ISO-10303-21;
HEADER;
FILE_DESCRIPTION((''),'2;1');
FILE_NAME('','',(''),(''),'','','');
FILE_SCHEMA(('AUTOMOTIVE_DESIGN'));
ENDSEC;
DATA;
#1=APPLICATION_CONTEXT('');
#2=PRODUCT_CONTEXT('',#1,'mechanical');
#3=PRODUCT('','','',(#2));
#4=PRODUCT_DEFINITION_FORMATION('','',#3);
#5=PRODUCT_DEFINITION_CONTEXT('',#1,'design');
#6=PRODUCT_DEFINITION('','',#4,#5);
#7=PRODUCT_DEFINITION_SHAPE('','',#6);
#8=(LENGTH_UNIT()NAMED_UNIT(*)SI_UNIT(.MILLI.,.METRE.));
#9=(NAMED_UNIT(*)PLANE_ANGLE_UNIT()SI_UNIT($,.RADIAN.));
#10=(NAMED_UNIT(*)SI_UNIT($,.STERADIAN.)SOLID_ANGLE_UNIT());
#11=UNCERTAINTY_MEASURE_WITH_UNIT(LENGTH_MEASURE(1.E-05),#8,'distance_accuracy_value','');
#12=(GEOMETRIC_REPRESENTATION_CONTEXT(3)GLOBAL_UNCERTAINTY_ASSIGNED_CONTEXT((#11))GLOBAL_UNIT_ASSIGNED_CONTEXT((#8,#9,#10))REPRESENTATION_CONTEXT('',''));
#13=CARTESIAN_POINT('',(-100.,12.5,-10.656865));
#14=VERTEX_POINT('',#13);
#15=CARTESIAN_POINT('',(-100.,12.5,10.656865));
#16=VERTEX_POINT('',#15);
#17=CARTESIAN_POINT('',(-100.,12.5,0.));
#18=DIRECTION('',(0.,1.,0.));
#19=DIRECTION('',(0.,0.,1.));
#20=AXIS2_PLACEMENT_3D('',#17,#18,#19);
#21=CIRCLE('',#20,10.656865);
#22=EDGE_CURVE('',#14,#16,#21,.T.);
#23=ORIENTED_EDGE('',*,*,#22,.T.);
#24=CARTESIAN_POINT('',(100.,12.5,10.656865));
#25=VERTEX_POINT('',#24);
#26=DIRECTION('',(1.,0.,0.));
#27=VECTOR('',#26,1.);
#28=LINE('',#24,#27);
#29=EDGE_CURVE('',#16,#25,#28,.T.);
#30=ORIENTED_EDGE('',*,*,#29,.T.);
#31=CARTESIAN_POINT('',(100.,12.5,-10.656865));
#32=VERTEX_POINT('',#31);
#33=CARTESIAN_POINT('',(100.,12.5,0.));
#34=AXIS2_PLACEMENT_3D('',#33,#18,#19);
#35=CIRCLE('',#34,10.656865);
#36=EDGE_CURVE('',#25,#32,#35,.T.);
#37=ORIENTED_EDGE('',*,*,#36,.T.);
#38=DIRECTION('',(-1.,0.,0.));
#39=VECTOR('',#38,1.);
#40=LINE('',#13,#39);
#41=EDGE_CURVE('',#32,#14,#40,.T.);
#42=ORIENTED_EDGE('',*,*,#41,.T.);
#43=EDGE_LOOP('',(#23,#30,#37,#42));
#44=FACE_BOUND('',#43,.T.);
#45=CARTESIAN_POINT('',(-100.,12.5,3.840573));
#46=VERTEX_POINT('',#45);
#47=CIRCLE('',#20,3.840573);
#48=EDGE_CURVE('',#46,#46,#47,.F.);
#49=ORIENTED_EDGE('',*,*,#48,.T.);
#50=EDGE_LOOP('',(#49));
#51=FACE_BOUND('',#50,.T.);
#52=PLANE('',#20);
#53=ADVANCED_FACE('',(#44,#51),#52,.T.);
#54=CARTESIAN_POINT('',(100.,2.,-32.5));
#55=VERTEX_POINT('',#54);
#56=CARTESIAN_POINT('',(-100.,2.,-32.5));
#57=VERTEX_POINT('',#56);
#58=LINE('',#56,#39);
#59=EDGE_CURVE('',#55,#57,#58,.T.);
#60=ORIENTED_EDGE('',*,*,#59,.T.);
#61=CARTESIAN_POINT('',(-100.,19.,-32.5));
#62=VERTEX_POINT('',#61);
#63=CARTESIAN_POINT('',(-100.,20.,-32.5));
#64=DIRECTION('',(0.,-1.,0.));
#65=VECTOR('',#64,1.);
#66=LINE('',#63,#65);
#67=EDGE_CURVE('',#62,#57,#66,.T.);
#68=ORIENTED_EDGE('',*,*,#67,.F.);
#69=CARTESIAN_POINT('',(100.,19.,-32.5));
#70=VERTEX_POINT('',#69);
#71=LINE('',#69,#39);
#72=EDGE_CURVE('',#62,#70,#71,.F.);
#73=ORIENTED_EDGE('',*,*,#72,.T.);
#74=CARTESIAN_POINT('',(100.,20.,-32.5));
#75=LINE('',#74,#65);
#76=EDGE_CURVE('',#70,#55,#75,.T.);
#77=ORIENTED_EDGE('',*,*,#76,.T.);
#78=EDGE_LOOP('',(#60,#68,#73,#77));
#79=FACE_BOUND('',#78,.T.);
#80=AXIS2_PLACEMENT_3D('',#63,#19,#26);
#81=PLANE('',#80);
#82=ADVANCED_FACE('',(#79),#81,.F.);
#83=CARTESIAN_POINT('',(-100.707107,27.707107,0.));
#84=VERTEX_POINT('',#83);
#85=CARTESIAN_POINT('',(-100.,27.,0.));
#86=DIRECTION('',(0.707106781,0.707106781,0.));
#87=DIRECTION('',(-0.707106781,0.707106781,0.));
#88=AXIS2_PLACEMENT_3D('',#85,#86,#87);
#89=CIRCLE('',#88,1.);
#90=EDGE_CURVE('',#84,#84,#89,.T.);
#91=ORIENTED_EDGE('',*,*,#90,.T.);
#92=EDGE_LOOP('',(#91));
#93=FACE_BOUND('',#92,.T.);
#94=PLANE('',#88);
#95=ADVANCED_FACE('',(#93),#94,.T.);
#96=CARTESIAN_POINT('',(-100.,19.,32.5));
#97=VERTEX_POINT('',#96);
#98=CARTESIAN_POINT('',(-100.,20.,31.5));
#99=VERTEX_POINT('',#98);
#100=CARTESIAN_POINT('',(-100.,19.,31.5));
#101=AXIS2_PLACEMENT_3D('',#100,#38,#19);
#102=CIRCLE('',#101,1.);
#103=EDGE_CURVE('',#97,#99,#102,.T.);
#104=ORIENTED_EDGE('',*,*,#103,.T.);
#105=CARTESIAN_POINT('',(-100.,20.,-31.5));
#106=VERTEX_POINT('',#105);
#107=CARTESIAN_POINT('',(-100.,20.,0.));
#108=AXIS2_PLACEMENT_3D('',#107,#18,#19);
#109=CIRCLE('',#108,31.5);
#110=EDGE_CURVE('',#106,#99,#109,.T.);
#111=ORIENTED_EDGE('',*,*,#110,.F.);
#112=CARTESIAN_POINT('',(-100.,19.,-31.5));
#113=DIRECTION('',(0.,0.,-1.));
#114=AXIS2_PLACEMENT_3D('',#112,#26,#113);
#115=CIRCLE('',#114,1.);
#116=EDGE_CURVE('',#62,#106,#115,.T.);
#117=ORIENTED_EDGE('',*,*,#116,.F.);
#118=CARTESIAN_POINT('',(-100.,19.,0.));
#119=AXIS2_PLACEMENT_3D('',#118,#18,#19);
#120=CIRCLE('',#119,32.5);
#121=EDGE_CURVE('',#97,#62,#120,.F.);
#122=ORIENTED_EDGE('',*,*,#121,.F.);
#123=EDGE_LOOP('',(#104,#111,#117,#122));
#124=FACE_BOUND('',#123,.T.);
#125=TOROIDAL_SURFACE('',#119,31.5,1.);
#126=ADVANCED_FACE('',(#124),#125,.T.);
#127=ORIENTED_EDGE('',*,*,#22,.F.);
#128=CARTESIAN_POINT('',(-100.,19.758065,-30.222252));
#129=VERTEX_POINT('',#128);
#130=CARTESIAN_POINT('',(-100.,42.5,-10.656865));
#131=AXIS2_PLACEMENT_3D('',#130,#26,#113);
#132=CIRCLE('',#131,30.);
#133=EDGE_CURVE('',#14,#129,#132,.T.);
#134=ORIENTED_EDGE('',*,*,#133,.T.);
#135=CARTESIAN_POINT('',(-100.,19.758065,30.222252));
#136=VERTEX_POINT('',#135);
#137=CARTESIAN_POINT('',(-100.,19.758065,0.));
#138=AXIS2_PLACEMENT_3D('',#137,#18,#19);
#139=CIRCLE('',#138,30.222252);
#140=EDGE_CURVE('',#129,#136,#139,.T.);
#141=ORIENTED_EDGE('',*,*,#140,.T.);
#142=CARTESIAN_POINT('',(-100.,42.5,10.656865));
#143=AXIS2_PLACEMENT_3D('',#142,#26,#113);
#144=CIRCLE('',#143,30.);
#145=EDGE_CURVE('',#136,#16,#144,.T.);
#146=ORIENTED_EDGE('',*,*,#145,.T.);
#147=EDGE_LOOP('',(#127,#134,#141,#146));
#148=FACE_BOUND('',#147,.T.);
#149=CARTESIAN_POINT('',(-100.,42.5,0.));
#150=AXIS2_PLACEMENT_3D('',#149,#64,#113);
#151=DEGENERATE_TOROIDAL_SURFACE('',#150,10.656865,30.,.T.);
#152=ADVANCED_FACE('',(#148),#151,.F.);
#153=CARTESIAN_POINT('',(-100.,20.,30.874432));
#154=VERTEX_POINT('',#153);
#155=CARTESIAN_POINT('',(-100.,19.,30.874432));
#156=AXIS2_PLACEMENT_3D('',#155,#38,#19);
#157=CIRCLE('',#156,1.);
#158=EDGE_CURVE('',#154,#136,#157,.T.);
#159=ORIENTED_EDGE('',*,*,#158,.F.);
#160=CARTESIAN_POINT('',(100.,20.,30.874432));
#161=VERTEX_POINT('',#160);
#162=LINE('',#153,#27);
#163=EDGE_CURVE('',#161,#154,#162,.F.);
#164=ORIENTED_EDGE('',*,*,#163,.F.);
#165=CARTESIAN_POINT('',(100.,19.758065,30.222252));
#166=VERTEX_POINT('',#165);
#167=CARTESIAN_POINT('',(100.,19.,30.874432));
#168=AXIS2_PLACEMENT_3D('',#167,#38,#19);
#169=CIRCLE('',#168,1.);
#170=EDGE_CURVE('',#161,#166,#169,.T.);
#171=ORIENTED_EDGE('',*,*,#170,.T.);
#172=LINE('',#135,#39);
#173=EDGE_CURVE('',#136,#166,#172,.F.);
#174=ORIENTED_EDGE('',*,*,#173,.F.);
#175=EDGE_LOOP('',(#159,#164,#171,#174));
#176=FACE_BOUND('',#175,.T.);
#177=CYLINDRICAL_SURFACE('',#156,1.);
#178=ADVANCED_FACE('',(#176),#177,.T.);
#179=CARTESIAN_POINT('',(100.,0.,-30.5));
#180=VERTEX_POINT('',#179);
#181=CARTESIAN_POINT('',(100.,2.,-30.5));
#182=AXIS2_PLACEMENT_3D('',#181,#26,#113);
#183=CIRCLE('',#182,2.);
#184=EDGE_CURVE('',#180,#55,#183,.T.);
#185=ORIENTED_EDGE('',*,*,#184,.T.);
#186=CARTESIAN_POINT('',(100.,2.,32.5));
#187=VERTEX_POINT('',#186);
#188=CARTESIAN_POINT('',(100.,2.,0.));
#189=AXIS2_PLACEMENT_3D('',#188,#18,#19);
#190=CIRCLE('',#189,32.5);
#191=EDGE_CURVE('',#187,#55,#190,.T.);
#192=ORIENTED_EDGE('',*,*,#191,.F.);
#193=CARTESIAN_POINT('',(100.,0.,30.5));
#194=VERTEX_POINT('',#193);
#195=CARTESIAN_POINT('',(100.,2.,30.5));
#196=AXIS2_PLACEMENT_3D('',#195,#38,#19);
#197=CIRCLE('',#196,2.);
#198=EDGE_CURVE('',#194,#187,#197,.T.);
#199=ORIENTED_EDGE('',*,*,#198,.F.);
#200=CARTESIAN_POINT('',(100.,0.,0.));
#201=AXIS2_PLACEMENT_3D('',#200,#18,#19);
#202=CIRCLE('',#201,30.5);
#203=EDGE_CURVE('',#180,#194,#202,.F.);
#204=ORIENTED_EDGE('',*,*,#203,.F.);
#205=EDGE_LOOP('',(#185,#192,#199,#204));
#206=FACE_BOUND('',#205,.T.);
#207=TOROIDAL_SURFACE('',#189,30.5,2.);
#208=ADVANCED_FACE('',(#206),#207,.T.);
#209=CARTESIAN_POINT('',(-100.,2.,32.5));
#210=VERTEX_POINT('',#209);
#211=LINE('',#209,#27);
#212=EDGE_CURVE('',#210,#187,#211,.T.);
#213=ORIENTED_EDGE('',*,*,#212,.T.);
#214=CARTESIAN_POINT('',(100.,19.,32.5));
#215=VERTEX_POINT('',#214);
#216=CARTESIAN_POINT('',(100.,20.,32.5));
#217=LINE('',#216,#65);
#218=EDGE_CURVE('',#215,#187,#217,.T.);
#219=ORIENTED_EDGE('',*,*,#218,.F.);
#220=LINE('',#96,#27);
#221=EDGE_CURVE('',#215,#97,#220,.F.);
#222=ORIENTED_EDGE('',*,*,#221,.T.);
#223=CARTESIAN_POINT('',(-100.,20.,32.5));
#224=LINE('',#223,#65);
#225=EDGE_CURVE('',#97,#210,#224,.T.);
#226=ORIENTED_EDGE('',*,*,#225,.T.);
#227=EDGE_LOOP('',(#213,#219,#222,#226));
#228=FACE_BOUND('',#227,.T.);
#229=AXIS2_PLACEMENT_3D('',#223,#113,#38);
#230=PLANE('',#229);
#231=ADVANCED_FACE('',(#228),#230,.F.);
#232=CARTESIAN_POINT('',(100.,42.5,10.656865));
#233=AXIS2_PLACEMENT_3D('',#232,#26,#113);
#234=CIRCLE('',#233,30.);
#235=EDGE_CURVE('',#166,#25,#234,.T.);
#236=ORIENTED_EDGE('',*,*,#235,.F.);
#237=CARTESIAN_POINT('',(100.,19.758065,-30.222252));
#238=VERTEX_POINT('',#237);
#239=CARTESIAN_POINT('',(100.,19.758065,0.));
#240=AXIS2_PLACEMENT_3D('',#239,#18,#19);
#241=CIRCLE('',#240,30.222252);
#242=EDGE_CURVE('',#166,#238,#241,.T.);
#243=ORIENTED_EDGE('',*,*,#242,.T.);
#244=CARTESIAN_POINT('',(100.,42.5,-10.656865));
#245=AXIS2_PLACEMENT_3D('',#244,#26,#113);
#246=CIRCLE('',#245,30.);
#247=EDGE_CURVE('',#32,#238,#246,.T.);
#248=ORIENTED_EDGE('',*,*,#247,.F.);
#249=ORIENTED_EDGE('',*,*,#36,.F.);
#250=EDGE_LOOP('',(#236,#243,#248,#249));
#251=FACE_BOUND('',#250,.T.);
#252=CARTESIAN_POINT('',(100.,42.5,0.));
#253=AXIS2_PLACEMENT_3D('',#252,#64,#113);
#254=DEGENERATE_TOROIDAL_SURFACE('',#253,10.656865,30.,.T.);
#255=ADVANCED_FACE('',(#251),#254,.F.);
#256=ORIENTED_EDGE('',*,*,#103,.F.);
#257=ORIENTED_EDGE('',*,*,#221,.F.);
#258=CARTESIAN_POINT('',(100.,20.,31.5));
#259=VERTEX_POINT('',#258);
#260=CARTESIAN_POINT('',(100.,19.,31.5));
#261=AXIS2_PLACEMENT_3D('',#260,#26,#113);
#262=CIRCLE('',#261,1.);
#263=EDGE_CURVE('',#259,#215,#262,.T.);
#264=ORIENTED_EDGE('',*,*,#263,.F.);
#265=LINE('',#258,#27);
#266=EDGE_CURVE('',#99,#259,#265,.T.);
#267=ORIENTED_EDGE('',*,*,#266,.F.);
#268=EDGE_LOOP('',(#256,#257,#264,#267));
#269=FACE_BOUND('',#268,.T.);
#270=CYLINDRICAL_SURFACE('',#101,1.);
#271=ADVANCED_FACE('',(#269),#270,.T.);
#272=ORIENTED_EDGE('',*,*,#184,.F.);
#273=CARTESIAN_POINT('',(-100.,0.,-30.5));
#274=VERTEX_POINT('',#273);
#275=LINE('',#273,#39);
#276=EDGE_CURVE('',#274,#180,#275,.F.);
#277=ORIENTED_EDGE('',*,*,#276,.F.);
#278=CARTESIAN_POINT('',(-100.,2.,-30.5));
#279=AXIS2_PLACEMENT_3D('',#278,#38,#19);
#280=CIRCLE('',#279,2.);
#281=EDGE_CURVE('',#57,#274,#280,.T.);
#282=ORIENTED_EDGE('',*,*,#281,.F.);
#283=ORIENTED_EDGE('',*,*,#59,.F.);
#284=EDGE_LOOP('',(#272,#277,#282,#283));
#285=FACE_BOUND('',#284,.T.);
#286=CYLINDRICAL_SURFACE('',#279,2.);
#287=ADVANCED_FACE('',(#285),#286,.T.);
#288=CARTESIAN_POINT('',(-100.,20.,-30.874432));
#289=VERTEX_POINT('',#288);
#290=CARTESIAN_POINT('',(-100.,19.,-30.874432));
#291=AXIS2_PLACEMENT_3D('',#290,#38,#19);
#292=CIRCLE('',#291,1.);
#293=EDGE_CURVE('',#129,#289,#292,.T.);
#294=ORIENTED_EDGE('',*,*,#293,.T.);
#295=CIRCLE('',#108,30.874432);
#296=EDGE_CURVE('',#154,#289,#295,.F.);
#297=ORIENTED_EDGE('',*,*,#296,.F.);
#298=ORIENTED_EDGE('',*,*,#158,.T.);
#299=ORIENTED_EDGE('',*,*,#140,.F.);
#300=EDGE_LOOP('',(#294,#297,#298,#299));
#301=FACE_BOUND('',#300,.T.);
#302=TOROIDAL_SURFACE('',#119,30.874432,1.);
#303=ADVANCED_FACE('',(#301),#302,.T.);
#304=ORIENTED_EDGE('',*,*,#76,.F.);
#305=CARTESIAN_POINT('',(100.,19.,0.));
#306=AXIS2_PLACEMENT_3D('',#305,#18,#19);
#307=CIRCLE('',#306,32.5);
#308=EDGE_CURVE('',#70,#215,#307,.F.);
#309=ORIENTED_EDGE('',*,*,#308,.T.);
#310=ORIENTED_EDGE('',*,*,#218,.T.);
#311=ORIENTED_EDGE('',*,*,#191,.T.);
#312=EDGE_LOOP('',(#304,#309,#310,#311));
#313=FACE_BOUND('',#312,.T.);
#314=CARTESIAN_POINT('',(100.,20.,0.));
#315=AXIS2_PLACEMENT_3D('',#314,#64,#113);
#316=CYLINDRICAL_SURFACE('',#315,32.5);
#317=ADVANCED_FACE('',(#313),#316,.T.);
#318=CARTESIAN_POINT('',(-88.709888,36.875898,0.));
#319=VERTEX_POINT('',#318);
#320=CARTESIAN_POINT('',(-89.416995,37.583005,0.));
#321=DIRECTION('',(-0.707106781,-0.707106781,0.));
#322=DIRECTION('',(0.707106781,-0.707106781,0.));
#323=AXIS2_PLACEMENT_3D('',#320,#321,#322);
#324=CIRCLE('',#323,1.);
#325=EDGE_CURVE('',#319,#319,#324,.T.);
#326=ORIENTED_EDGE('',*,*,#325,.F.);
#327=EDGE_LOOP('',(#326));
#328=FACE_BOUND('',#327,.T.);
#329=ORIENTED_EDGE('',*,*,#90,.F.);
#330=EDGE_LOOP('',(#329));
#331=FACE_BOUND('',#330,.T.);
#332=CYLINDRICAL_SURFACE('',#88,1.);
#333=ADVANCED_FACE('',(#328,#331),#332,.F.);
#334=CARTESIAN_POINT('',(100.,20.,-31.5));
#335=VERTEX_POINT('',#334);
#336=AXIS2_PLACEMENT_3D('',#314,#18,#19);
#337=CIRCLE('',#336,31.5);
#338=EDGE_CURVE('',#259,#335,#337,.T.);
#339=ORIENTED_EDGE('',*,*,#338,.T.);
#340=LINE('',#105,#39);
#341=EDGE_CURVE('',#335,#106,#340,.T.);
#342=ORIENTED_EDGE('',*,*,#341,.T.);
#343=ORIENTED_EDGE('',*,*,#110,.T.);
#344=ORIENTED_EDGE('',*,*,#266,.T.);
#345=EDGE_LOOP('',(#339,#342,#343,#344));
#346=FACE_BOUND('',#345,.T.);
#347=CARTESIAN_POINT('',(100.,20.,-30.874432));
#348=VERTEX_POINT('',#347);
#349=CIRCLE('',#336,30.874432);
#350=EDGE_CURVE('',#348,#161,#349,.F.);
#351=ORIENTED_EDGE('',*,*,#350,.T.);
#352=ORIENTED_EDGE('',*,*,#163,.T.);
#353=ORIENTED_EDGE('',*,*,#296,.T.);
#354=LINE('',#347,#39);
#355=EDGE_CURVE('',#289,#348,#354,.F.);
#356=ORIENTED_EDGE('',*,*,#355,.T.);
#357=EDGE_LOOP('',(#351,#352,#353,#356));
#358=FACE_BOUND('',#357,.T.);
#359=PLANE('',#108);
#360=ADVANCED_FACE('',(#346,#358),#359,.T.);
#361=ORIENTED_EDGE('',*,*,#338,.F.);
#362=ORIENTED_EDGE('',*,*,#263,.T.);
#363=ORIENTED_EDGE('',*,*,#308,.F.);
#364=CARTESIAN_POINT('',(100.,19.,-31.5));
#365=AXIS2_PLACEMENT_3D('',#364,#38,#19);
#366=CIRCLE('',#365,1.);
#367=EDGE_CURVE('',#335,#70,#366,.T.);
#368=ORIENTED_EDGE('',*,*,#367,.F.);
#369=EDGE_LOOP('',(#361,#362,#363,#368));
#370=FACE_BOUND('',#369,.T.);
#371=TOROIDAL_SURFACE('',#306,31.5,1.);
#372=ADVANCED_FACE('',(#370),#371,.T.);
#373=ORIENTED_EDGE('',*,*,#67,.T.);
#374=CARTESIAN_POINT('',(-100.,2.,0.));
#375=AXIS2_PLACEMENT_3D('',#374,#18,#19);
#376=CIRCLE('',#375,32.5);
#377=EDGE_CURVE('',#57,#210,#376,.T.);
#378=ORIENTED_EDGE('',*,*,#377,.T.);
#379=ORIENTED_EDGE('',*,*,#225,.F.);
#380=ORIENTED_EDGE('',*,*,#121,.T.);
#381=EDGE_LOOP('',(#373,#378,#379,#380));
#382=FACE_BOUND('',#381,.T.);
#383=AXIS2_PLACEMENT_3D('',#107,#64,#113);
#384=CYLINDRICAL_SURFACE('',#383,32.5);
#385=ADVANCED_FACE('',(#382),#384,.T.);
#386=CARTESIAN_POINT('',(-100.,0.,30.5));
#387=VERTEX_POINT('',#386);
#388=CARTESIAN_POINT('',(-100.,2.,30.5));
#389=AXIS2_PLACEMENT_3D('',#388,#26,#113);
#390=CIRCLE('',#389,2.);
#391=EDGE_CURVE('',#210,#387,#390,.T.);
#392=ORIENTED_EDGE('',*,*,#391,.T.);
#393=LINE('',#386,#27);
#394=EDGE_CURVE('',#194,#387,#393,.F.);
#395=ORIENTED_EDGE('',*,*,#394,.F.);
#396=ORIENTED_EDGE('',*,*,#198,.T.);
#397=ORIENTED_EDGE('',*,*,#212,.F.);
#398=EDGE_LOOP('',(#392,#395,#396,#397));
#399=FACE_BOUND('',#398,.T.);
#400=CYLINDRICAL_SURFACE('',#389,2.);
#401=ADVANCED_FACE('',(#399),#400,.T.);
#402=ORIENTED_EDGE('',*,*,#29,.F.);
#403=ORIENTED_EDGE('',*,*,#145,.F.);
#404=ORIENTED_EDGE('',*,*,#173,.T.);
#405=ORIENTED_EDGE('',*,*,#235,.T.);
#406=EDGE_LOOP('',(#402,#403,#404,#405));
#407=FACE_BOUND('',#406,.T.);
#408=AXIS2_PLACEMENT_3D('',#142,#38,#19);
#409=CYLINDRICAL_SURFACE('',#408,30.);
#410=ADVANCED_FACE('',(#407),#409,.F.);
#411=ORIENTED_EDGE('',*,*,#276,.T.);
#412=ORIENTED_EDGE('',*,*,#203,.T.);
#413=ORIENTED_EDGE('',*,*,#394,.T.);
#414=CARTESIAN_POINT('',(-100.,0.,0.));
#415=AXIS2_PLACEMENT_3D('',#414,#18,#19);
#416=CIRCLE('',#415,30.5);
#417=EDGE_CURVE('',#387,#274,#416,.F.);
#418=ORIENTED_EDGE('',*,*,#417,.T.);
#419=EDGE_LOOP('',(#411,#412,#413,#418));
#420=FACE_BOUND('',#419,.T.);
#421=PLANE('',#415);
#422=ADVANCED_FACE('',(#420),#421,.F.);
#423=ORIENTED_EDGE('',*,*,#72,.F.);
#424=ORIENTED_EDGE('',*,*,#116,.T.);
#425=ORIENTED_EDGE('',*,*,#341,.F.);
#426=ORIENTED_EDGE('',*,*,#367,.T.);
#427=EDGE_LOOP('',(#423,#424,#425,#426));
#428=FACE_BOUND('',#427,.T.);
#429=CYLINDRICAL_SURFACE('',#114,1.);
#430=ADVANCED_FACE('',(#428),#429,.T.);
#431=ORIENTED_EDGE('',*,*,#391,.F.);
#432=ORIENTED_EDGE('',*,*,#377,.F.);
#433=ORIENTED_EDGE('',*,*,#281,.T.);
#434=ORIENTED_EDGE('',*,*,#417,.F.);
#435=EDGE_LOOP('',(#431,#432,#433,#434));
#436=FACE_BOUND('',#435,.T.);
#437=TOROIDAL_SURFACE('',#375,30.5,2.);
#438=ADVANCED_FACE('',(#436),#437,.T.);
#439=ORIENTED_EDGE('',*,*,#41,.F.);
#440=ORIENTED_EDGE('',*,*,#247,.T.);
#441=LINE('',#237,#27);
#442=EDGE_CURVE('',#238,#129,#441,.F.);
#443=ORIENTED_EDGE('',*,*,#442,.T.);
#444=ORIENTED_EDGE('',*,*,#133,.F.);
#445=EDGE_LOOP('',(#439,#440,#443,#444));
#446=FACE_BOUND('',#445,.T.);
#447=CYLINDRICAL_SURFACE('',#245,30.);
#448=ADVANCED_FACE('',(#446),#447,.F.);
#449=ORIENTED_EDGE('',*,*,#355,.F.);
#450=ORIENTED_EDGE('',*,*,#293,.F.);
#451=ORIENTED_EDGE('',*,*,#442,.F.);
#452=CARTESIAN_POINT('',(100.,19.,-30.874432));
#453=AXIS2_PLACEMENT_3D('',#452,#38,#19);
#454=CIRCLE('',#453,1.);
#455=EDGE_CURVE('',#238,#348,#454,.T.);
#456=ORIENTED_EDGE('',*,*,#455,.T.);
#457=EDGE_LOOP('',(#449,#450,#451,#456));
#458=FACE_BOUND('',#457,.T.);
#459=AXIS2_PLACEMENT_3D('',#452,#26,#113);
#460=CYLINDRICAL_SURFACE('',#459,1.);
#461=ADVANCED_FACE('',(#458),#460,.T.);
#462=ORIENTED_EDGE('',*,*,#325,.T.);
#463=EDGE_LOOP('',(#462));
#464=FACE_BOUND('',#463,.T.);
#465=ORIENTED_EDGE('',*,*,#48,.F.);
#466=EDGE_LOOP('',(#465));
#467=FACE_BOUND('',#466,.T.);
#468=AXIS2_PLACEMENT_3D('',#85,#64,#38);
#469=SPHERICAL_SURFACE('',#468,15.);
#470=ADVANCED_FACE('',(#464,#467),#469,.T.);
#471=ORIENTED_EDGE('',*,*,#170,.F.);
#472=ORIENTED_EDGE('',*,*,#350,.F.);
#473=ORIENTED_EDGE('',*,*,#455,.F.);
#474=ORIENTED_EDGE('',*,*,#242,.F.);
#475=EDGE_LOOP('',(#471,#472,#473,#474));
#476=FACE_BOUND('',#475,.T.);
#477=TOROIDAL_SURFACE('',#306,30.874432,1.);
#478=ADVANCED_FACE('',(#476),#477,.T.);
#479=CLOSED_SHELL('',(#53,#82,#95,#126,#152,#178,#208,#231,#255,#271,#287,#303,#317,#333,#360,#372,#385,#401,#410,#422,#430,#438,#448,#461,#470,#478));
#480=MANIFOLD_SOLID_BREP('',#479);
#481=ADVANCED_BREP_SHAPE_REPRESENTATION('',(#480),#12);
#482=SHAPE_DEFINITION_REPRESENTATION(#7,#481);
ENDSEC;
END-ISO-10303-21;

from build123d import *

# Parameters (mm, degrees)
BOSS_EXTRUDE1_DEPTH = 20
CUT_EXTRUDE1_DEPTH  = 7.5
FILLET1_R           = 30
FILLET2_R           = 1
FILLET3_R           = 2
SKETCH6_R           = 1
CUT_EXTRUDE2_DEPTH  = 15


with BuildPart() as part:
    # Sketch1 → Boss-Extrude1 (new body)
    with BuildSketch(Plane(origin=(0, 0, 0), x_dir=(1, 0, 0), z_dir=(0, 1, 0))):
        with BuildLine():
            Line((-100, 32.5), (100, 32.5))
            ThreePointArc((100, 32.5), (132.5, 0), (100, -32.5))
            Line((100, -32.5), (-100, -32.5))
            ThreePointArc((-100, -32.5), (-132.5, 0), (-100, 32.5))
        make_face()
    extrude(amount=BOSS_EXTRUDE1_DEPTH)

    # Sketch2 → Cut-Extrude1 (cut)
    with BuildSketch(Plane(origin=(0, 20, 0), x_dir=(1, 0, 0), z_dir=(0, 1, 0))):
        with BuildLine():
            Line((-100, -30.5), (100, -30.5))
            ThreePointArc((100, -30.5), (130.5, 0), (100, 30.5))
            Line((100, 30.5), (-100, 30.5))
            ThreePointArc((-100, 30.5), (-130.5, 0), (-100, -30.5))
        make_face()
    extrude(amount=-CUT_EXTRUDE1_DEPTH, mode=Mode.SUBTRACT)

    # Fillet1
    # the kernel refuses this fillet: 30 mm, written as the material it adds along each edge
    with BuildSketch(Plane(origin=(100, 12.5, -30.5), x_dir=(0, 1, 0), z_dir=(-1, 0, 0)), Plane(origin=(-100, 12.5, 30.5), x_dir=(0, 1, 0), z_dir=(1, 0, 0))) as fillet1_piece_1:
        with BuildLine():
            CenterArc((30, -19.843134833), FILLET1_R, 138.590377891, 41.409622109)
            Line((0, -19.843134833), (-0.6, -19.843134833))
            Line((-0.6, -19.843134833), (-0.6, 0))
            Line((-0.6, 0), (0, 0.6))
            ThreePointArc((0, 0.6), (3.75, 0.6), (7.05, 0.396862697))
            Line((7.05, 0.396862697), (7.5, 0))
        make_face()
    extrude(amount=200)
    with BuildSketch(Plane(origin=(-100, 12.5, 0), x_dir=(0, 0, -1), z_dir=(1, 0, 0))) as fillet1_piece_2:
        with BuildLine():
            CenterArc((10.656865167, 30), FILLET1_R, 270, 41.409622109)
            Line((10.656865167, 0), (10.656865167, -0.6))
            Line((10.656865167, -0.6), (30.5, -0.6))
            Line((30.5, -0.6), (31.1, 0))
            ThreePointArc((31.1, 0), (31.1, 3.75), (30.896862697, 7.05))
            Line((30.896862697, 7.05), (30.5, 7.5))
        make_face()
    revolve(axis=Axis((-100, 12.5, 0), (0, 1, 0)), revolution_arc=180)
    with BuildSketch(Plane(origin=(100, 12.5, 0), x_dir=(0, 0, 1), z_dir=(-1, 0, 0))) as fillet1_piece_3:
        with BuildLine():
            CenterArc((10.656865167, 30), FILLET1_R, 270, 41.409622109)
            Line((10.656865167, 0), (10.656865167, -0.6))
            Line((10.656865167, -0.6), (30.5, -0.6))
            Line((30.5, -0.6), (31.1, 0))
            ThreePointArc((31.1, 0), (31.1, 3.75), (30.896862697, 7.05))
            Line((30.896862697, 7.05), (30.5, 7.5))
        make_face()
    revolve(axis=Axis((100, 12.5, 0), (0, 1, 0)), revolution_arc=180)

    # Fillet2
    fillet2_edges = [part.edges().sort_by_distance(p)[0] for p in [
        (132.5, 20, 0),
        (0, 20, -32.5),
        (-130.5, 20, 0),
        (0, 20, 30.5),
        (130.5, 20, 0),
        (0, 20, -30.5),
        (-132.5, 20, 0),
        (0, 20, 32.5),
    ]]
    fillet(fillet2_edges, radius=FILLET2_R)

    # Fillet3
    fillet3_edges = [part.edges().sort_by_distance(p)[0] for p in [
        (0, 0, -32.5),
        (132.5, 0, 0),
        (0, 0, 32.5),
        (-132.5, 0, 0),
    ]]
    fillet(fillet3_edges, radius=FILLET3_R)

    # Sketch4 → Revolve1 (revolve)
    with BuildSketch(Plane.XY):
        with BuildLine():
            Line((-100, 12), (-100, 42))
            ThreePointArc((-100, 42), (-115, 27), (-100, 12))
        make_face()
    revolve(axis=Axis((-100, 12, 0), (0, 1, 0)))

    # Sketch6 → Cut-Extrude2 (cut)
    with BuildSketch(Plane(origin=(-25.893398282, -25.893398282, 0), x_dir=(0.7071067811865488, -0.7071067811865464, 0), z_dir=(0.7071067811865464, 0.7071067811865488, 0))):
        with Locations(Location((-89.802561211, 0, 0), (0, 0, 180))):
            Circle(SKETCH6_R)
    extrude(amount=-CUT_EXTRUDE2_DEPTH, mode=Mode.SUBTRACT)


solid = part.part
